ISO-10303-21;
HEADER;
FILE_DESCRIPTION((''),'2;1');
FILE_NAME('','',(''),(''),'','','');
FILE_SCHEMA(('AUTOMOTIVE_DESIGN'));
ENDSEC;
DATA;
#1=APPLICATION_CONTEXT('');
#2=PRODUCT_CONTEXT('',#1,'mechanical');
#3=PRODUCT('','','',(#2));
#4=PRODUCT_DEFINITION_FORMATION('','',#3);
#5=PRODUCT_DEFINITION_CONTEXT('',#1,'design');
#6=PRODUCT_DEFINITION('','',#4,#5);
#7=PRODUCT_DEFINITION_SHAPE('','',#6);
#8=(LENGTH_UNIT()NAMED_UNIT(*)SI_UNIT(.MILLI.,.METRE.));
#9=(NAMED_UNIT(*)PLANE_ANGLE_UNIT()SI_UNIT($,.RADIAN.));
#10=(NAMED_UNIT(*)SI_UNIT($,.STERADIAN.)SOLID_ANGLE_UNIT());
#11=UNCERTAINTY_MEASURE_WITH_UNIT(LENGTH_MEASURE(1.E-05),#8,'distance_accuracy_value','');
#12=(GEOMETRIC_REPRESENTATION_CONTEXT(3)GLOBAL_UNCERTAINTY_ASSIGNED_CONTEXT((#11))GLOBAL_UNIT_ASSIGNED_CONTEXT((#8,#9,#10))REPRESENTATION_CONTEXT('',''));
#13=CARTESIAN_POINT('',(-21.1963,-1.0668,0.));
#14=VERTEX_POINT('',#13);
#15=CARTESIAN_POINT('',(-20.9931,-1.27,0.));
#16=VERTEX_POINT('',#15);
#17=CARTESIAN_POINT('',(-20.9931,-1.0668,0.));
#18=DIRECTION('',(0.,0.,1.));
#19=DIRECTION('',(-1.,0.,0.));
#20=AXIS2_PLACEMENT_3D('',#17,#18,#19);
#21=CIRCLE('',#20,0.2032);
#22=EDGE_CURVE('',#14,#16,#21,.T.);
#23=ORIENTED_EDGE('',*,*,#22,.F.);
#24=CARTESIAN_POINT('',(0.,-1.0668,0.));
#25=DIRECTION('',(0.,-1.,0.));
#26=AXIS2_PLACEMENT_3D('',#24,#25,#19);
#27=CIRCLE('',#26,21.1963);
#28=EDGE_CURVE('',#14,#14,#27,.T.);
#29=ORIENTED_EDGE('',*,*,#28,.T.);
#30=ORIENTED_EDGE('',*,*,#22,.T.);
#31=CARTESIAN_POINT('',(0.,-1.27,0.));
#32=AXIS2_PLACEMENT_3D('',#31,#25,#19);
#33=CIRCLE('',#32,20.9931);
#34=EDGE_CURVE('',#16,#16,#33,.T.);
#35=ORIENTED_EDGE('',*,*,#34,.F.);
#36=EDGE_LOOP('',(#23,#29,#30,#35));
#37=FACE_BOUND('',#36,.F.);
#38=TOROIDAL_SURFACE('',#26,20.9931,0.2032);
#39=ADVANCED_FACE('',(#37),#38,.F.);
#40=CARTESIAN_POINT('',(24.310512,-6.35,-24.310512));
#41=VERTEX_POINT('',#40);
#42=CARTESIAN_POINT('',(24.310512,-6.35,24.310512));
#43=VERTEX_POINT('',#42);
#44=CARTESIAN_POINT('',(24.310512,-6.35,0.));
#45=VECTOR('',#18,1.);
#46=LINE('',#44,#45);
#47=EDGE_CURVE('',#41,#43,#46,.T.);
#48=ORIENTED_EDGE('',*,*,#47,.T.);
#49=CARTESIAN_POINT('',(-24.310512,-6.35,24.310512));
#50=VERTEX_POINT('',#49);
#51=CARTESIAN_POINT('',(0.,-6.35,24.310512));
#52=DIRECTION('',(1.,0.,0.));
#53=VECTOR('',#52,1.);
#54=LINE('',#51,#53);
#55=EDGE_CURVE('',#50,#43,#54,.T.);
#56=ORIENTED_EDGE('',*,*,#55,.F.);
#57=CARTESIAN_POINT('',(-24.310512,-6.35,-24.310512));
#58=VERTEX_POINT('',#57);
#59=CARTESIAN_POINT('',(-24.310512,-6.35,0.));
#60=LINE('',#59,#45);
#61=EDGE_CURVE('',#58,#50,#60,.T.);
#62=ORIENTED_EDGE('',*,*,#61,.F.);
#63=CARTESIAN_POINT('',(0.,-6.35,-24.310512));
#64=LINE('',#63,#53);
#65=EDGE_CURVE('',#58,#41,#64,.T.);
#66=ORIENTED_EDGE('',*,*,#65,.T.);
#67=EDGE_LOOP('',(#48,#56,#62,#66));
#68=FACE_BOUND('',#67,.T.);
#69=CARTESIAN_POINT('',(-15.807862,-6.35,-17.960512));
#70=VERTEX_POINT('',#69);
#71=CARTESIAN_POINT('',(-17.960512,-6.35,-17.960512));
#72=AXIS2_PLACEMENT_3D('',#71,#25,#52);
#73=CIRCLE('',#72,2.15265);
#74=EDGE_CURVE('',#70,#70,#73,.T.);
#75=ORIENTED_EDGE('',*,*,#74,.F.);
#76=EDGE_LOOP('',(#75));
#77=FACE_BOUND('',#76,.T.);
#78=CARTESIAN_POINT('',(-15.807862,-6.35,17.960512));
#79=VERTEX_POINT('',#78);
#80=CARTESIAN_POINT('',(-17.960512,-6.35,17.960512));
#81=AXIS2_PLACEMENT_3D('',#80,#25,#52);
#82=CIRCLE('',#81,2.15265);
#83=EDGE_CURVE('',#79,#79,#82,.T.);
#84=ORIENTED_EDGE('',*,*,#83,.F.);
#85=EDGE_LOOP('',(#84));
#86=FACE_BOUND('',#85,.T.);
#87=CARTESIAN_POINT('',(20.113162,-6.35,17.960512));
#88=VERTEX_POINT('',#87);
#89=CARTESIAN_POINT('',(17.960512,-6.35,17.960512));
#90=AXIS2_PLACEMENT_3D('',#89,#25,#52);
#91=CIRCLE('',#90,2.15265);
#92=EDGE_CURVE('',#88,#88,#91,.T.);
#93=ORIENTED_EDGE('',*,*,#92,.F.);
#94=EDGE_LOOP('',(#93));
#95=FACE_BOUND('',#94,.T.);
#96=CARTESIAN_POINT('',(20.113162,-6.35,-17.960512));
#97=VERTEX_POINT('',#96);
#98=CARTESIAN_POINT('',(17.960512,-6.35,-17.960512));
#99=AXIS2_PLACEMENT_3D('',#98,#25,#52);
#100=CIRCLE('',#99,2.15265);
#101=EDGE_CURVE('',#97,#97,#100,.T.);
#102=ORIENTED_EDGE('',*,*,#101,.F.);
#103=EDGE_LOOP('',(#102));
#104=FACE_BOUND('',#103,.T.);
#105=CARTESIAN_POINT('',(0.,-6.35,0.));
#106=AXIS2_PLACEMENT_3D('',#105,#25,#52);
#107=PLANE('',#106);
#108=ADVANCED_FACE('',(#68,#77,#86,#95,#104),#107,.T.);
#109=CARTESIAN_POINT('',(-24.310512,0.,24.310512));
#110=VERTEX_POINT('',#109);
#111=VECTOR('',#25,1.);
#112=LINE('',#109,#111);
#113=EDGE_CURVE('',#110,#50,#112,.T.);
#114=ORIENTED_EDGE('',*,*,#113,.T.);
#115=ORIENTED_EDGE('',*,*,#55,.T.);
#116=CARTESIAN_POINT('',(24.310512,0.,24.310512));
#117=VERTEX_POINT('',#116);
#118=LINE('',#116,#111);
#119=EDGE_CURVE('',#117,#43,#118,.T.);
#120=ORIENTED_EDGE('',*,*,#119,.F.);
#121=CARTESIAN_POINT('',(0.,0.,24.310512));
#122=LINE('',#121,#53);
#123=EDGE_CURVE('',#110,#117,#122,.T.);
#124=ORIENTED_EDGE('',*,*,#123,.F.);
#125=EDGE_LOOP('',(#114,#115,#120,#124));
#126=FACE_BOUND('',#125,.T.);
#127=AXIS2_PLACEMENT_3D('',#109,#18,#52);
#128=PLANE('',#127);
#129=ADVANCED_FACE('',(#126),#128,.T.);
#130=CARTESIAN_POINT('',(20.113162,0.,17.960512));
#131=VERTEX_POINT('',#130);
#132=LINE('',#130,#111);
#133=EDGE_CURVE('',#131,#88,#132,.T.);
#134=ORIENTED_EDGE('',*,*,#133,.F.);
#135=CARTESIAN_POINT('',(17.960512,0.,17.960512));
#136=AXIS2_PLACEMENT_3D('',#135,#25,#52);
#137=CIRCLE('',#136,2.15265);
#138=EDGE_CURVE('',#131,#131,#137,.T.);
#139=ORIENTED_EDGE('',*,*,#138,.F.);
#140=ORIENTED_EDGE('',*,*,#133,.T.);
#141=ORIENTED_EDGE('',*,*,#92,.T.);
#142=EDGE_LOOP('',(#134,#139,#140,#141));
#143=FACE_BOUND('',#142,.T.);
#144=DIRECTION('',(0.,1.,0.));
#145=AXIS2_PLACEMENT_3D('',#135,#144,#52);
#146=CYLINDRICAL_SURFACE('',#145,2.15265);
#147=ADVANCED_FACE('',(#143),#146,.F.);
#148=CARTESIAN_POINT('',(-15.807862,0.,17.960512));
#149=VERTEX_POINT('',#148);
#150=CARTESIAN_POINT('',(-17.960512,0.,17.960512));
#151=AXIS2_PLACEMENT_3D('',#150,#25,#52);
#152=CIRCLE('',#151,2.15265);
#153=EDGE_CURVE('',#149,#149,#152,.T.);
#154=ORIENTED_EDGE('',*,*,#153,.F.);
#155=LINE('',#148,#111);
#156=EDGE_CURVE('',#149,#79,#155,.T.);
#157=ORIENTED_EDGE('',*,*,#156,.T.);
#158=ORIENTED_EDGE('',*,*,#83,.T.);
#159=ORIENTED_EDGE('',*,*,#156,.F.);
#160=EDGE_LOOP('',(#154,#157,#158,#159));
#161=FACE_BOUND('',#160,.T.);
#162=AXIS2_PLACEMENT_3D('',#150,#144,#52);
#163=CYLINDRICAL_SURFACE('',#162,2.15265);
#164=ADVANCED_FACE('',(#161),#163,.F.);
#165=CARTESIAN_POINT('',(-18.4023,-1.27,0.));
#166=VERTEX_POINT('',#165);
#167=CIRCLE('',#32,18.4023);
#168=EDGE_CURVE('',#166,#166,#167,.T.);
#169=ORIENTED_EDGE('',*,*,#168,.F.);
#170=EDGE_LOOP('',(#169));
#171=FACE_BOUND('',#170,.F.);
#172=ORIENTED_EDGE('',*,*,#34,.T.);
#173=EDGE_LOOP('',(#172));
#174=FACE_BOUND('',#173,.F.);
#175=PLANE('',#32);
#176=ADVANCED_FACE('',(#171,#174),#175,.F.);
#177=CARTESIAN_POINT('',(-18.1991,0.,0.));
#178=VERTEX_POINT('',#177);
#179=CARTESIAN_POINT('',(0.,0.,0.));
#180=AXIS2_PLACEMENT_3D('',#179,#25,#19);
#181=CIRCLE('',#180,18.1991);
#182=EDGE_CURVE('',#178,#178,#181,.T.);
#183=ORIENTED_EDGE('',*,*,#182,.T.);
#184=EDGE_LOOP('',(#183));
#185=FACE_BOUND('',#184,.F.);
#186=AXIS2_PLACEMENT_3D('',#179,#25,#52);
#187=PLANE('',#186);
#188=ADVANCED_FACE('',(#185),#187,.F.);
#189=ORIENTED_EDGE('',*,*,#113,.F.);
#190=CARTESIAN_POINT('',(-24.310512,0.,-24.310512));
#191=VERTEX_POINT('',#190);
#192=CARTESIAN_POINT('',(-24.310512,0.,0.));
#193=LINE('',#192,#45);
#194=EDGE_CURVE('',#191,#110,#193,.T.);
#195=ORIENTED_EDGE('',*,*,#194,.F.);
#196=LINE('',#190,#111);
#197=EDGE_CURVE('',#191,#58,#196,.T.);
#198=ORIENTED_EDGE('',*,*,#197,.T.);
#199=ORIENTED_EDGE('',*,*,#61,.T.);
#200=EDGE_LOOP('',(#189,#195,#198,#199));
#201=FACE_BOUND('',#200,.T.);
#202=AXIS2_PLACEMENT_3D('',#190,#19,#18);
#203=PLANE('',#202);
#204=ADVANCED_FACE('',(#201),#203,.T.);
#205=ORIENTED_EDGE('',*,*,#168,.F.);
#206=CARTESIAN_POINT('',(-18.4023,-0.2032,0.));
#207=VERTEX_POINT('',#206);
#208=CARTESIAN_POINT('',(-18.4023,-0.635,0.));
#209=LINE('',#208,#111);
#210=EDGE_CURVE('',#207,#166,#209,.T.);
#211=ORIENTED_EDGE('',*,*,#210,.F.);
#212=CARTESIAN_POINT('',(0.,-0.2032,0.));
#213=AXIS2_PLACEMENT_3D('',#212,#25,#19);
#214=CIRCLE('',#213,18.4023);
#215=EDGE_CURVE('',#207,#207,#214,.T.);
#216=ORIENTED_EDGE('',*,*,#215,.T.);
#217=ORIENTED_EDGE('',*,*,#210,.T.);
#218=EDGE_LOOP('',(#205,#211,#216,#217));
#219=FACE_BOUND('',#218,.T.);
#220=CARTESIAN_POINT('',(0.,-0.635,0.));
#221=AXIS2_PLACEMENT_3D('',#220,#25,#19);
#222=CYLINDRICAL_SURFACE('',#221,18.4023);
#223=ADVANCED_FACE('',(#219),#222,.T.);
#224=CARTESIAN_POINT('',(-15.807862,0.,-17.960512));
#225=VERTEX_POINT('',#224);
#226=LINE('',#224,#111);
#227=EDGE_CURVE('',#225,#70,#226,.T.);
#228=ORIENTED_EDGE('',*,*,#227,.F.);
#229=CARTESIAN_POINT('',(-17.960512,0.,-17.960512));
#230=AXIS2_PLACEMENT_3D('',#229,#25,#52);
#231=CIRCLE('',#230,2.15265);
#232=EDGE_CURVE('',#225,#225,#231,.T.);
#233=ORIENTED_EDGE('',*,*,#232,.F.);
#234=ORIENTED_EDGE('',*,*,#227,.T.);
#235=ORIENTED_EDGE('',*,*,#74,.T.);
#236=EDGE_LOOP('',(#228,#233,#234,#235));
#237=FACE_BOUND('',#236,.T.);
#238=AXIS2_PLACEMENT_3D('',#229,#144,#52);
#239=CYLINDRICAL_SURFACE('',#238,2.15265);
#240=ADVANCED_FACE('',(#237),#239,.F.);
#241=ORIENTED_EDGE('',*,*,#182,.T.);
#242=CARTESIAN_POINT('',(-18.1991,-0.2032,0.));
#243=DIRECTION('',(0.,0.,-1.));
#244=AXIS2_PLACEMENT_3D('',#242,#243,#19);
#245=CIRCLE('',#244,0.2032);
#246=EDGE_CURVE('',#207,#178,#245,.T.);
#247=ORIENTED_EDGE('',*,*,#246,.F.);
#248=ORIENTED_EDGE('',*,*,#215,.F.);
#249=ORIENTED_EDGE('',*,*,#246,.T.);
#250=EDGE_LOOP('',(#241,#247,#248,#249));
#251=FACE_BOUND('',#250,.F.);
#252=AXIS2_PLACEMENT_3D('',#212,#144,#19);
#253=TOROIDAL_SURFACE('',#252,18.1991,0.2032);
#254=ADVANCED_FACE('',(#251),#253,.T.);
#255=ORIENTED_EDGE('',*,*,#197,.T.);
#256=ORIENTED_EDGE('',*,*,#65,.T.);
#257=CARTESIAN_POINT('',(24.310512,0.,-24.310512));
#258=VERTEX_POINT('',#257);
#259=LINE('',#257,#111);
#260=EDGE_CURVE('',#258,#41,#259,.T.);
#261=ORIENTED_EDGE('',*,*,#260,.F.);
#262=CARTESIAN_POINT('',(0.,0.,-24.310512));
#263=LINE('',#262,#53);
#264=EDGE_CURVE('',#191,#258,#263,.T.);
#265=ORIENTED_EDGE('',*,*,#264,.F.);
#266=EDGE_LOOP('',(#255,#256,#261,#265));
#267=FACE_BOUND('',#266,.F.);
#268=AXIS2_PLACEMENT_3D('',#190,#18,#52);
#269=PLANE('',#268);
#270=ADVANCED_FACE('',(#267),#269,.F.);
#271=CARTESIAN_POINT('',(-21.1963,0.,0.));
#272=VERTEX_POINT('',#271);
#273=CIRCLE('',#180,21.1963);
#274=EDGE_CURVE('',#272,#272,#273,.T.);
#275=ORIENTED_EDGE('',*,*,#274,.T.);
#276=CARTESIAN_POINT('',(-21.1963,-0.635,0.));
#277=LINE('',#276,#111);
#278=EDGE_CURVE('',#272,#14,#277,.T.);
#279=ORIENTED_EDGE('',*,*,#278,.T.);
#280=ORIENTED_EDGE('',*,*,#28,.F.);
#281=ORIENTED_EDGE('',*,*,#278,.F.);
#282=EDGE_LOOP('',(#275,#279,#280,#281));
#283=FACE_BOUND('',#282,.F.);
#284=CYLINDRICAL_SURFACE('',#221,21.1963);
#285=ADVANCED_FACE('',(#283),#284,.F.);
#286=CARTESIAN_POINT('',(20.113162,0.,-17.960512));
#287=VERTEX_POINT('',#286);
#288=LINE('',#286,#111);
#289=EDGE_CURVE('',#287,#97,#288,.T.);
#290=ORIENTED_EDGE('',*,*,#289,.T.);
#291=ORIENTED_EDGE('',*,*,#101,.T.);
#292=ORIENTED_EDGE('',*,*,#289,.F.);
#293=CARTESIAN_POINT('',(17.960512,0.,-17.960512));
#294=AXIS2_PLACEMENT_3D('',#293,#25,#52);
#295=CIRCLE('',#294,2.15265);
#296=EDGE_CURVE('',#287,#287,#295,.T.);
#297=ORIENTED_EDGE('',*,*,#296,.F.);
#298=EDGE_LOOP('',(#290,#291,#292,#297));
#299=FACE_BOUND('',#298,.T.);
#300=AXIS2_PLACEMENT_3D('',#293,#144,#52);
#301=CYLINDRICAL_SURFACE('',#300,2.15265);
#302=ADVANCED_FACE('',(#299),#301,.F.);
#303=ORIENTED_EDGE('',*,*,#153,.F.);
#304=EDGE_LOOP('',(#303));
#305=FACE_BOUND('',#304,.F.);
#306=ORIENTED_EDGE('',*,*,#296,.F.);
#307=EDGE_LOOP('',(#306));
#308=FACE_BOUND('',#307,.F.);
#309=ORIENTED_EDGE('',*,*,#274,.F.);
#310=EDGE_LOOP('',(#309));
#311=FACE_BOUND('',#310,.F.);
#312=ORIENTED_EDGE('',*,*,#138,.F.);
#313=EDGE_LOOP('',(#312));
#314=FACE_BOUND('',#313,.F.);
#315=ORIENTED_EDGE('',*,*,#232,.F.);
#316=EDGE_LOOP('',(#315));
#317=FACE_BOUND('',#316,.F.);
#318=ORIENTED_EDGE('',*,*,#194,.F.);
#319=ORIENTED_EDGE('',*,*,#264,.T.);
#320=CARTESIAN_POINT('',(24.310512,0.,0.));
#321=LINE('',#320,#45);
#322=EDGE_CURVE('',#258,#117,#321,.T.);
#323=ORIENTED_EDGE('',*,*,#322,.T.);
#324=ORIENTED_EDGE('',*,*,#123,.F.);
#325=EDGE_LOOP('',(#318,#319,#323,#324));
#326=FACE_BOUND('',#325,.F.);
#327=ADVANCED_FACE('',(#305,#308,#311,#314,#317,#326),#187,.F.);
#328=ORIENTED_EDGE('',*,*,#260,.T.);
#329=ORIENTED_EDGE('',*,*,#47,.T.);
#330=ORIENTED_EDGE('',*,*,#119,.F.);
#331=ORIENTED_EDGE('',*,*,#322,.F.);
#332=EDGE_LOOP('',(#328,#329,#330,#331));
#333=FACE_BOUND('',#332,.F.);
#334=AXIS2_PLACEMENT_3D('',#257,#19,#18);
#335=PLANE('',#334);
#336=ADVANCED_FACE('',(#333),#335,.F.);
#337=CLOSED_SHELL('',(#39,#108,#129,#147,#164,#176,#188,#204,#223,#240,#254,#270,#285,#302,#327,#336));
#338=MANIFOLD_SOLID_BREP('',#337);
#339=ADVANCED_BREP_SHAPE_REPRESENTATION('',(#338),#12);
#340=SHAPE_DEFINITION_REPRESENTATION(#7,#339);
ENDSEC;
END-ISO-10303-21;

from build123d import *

# Parameters (mm, degrees)
F0_W     = 48.6210244843
F0_H     = 48.6210244843
F0_R     = 2.15265
F1_DEPTH = 6.35
F6_W     = 2.794
F6_H     = 1.27
F8_R     = 0.2032


with BuildPart() as f1:
    # F0 (on Front) → F1 (new body)
    with BuildSketch(Plane.XZ):
        Rectangle(F0_W, F0_H)
        with Locations((-17.9605122421, -17.9605122421)):
            Circle(F0_R, mode=Mode.SUBTRACT)
        with Locations((17.9605122421, -17.9605122421)):
            Circle(F0_R, mode=Mode.SUBTRACT)
        with Locations((-17.9605122421, 17.9605122421)):
            Circle(F0_R, mode=Mode.SUBTRACT)
        with Locations((17.9605122421, 17.9605122421)):
            Circle(F0_R, mode=Mode.SUBTRACT)
    extrude(amount=F1_DEPTH)

    # F6 (on 3pt) → F7 (revolve, cut)
    with BuildSketch(Plane(origin=(0, 0, 0), x_dir=(1, 0, 0), z_dir=(0, 0, -1))):
        with Locations((-19.7993, 0.635)):
            Rectangle(F6_W, F6_H)
    revolve(axis=Axis((0, 0.4501026124, 0), (0, -1, 0)), mode=Mode.SUBTRACT)

    # F8
    f8_edges = [f1.edges().sort_by_distance(p)[0] for p in [
        (21.1963, -1.27, 0),
        (18.4023, 0, 0),
    ]]
    fillet(f8_edges, radius=F8_R)


solid = f1.part
